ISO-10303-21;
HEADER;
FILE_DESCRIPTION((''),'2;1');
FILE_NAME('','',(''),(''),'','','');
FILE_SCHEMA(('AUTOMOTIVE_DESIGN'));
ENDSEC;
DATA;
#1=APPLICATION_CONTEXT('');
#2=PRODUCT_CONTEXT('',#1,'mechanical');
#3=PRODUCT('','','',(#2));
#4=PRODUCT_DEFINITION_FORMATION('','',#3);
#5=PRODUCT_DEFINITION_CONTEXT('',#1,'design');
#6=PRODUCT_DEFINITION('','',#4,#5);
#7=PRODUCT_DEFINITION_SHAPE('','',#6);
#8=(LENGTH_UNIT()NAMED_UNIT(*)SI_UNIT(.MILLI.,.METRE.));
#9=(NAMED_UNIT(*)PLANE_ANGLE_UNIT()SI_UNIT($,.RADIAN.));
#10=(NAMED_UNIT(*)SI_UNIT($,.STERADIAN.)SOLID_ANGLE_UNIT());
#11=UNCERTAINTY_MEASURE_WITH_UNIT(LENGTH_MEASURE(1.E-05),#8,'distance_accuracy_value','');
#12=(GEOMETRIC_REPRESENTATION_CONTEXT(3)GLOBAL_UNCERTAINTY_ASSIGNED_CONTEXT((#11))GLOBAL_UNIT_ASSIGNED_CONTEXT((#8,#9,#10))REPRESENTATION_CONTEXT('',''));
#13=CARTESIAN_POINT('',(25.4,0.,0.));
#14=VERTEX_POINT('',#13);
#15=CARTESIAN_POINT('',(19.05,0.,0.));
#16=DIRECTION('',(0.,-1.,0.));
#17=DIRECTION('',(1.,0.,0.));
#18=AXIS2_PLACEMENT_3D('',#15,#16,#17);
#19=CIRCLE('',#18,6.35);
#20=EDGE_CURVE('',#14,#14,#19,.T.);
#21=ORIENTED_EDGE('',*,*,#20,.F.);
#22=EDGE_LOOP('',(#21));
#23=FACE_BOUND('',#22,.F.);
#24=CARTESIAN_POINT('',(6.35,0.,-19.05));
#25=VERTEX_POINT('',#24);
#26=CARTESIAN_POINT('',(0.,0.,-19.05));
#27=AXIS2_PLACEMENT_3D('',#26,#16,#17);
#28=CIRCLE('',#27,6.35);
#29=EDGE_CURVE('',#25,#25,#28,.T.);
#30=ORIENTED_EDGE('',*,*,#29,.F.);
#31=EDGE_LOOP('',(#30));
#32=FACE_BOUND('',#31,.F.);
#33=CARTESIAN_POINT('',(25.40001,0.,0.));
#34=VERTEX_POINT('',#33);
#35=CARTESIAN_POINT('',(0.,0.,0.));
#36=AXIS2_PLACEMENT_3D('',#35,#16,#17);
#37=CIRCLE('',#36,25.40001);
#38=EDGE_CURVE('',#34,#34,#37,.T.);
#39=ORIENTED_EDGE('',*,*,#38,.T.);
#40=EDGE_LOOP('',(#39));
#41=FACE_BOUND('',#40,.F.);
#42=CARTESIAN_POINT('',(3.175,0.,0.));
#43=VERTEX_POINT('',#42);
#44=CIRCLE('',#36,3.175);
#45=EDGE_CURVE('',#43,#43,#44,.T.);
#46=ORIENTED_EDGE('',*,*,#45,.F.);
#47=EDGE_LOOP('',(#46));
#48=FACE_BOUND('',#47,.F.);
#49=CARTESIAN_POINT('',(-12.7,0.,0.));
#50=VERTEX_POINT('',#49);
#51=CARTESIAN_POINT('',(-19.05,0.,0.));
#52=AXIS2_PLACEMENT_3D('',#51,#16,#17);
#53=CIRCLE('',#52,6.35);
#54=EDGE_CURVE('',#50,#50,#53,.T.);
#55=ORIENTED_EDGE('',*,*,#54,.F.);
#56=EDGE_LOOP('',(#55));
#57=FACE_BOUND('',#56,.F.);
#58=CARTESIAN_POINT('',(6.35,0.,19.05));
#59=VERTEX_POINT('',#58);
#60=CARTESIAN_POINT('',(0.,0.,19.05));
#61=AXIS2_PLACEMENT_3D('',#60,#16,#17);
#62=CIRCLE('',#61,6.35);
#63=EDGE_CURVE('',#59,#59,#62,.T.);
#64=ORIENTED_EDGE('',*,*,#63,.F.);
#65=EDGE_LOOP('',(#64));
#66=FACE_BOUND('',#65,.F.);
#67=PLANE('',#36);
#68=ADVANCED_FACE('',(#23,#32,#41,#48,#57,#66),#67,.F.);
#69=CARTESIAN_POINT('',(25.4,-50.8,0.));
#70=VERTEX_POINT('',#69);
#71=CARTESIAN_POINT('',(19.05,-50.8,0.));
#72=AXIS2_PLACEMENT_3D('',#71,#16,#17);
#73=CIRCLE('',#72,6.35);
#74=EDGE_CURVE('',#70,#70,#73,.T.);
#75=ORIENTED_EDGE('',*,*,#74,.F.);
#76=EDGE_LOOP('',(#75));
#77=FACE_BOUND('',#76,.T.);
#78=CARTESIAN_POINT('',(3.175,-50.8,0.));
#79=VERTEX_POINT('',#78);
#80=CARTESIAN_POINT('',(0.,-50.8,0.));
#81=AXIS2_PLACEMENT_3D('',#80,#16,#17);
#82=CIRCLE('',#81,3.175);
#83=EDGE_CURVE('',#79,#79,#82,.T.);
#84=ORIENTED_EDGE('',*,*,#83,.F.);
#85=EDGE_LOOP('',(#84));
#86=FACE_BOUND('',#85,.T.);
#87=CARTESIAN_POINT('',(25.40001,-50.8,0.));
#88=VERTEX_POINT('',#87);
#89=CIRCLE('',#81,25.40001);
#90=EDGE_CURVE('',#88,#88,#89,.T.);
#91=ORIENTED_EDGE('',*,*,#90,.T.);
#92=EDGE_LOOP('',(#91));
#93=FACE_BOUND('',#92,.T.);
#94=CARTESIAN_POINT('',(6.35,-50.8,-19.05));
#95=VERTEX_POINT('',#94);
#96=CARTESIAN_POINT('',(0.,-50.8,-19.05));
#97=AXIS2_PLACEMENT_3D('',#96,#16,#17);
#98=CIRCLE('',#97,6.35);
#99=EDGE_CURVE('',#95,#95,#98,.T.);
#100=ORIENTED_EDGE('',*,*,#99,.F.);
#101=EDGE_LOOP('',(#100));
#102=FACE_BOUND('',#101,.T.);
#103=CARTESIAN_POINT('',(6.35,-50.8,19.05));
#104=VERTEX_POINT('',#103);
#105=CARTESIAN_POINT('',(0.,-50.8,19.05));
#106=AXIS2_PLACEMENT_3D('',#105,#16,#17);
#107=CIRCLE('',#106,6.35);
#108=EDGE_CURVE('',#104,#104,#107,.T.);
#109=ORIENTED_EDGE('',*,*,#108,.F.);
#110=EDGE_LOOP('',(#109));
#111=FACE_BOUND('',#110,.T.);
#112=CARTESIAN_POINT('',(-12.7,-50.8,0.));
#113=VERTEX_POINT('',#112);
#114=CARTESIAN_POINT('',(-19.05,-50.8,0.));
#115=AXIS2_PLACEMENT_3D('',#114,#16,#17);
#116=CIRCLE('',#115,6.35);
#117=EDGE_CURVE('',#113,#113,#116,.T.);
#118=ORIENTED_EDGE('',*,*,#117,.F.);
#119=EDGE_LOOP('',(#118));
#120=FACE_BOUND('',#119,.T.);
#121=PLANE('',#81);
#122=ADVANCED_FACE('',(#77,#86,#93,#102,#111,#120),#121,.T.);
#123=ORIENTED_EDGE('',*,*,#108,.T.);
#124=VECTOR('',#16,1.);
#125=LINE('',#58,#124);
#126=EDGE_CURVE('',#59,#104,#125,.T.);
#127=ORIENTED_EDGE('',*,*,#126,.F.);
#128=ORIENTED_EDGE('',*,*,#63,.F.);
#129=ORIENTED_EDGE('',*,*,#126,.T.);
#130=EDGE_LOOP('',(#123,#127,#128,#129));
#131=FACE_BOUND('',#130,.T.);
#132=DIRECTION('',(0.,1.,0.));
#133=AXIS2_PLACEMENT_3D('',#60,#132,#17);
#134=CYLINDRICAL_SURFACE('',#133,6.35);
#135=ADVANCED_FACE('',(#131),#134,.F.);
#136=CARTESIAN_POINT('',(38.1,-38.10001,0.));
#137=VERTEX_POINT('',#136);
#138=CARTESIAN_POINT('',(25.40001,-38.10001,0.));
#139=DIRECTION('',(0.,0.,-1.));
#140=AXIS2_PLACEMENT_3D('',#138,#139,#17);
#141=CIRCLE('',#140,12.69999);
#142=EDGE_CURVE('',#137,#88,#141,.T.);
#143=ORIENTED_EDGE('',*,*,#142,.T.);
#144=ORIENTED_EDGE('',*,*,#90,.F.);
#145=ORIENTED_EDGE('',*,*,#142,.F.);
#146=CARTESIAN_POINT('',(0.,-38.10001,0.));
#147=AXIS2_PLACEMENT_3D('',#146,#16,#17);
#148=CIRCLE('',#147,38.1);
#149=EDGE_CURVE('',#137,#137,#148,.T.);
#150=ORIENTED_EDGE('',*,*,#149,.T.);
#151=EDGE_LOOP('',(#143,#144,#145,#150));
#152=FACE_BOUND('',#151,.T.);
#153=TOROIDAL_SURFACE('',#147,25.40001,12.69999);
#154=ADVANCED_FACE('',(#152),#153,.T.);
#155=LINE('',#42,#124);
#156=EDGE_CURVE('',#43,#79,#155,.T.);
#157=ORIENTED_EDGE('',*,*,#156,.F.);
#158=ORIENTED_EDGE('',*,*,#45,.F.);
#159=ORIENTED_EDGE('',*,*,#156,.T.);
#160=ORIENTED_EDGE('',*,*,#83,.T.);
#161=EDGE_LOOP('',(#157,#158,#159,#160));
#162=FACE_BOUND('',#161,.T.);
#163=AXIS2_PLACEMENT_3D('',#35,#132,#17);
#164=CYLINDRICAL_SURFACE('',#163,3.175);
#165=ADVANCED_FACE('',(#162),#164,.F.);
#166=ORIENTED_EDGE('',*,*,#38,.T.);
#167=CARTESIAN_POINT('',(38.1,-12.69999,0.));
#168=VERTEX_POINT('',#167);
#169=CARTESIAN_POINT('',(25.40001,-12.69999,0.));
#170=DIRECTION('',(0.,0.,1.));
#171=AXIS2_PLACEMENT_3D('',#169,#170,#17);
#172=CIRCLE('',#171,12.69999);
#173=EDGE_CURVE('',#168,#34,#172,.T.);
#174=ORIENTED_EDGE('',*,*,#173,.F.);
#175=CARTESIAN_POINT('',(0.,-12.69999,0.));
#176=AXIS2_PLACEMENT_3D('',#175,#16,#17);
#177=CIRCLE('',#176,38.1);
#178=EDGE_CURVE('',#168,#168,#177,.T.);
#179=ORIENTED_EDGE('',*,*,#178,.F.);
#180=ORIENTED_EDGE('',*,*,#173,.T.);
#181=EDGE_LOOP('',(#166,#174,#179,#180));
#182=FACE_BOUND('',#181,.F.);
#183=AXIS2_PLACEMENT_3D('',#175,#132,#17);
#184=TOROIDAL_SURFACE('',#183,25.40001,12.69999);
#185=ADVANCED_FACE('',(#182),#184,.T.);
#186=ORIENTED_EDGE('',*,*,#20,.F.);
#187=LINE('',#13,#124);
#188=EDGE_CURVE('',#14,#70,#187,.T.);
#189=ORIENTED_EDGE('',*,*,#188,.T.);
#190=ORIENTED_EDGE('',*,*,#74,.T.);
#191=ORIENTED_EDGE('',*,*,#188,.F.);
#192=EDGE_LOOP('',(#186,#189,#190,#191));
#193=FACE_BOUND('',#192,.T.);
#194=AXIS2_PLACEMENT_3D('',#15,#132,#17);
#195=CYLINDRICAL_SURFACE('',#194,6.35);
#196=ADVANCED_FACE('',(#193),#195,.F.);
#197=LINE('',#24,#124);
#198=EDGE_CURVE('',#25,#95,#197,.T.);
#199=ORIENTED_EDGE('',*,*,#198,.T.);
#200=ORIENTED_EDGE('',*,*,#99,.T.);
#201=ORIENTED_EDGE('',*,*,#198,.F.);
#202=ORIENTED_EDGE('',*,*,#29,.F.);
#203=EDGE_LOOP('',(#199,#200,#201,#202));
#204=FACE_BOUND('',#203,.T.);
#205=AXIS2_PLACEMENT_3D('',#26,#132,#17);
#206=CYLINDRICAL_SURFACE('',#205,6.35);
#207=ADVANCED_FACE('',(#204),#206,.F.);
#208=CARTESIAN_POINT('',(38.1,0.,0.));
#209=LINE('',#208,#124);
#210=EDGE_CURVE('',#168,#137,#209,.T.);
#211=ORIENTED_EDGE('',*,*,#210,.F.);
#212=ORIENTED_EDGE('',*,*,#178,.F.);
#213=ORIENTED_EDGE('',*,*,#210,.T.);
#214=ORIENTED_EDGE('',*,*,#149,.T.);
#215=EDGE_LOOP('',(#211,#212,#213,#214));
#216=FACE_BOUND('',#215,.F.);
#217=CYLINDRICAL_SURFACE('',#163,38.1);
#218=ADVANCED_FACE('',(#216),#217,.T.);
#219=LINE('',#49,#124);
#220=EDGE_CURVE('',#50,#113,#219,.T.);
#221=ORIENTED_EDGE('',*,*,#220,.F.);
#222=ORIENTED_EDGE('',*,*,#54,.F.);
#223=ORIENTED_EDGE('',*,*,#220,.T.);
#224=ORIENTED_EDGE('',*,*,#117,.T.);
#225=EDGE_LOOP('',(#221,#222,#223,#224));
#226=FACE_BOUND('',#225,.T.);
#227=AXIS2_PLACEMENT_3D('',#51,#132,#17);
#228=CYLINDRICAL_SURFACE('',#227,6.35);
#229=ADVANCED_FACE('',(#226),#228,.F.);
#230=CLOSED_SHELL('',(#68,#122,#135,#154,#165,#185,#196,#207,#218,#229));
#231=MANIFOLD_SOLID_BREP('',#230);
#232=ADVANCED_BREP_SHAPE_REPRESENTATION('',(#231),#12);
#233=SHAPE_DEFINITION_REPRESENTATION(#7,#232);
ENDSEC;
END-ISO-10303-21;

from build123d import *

# Parameters (mm, degrees)
F0_R     = 38.1
F0_R_2   = 6.35
F0_R_3   = 3.175
F1_DEPTH = 50.8
F2_R     = 12.69999
F3_R     = 12.69999


# Not quite as in the source:
# - a fillet or chamfer is up to 0.001 mm smaller than in the source, because OpenCascade refuses the exact size


with BuildPart() as f1:
    # F0 (on Front) → F1 (new body)
    with BuildSketch(Plane.XZ):
        Circle(F0_R)
        with Locations((0, -19.05)):
            Circle(F0_R_2, mode=Mode.SUBTRACT)
        with Locations((-19.05, 0)):
            Circle(F0_R_2, mode=Mode.SUBTRACT)
        Circle(F0_R_3, mode=Mode.SUBTRACT)
        with Locations((19.05, 0)):
            Circle(F0_R_2, mode=Mode.SUBTRACT)
        with Locations((0, 19.05)):
            Circle(F0_R_2, mode=Mode.SUBTRACT)
    extrude(amount=F1_DEPTH)

    # F2 (radius 12.7 in the source; OpenCascade refuses exactly that, so slightly less here)
    f2_edges = [f1.edges().sort_by_distance(p)[0] for p in [
        (-38.1, -50.8, 0),
    ]]
    fillet(f2_edges, radius=F2_R)

    # F3 (radius 12.7 in the source; OpenCascade refuses exactly that, so slightly less here)
    f3_edges = [f1.edges().sort_by_distance(p)[0] for p in [
        (-38.1, 0, 0),
    ]]
    fillet(f3_edges, radius=F3_R)


solid = f1.part
